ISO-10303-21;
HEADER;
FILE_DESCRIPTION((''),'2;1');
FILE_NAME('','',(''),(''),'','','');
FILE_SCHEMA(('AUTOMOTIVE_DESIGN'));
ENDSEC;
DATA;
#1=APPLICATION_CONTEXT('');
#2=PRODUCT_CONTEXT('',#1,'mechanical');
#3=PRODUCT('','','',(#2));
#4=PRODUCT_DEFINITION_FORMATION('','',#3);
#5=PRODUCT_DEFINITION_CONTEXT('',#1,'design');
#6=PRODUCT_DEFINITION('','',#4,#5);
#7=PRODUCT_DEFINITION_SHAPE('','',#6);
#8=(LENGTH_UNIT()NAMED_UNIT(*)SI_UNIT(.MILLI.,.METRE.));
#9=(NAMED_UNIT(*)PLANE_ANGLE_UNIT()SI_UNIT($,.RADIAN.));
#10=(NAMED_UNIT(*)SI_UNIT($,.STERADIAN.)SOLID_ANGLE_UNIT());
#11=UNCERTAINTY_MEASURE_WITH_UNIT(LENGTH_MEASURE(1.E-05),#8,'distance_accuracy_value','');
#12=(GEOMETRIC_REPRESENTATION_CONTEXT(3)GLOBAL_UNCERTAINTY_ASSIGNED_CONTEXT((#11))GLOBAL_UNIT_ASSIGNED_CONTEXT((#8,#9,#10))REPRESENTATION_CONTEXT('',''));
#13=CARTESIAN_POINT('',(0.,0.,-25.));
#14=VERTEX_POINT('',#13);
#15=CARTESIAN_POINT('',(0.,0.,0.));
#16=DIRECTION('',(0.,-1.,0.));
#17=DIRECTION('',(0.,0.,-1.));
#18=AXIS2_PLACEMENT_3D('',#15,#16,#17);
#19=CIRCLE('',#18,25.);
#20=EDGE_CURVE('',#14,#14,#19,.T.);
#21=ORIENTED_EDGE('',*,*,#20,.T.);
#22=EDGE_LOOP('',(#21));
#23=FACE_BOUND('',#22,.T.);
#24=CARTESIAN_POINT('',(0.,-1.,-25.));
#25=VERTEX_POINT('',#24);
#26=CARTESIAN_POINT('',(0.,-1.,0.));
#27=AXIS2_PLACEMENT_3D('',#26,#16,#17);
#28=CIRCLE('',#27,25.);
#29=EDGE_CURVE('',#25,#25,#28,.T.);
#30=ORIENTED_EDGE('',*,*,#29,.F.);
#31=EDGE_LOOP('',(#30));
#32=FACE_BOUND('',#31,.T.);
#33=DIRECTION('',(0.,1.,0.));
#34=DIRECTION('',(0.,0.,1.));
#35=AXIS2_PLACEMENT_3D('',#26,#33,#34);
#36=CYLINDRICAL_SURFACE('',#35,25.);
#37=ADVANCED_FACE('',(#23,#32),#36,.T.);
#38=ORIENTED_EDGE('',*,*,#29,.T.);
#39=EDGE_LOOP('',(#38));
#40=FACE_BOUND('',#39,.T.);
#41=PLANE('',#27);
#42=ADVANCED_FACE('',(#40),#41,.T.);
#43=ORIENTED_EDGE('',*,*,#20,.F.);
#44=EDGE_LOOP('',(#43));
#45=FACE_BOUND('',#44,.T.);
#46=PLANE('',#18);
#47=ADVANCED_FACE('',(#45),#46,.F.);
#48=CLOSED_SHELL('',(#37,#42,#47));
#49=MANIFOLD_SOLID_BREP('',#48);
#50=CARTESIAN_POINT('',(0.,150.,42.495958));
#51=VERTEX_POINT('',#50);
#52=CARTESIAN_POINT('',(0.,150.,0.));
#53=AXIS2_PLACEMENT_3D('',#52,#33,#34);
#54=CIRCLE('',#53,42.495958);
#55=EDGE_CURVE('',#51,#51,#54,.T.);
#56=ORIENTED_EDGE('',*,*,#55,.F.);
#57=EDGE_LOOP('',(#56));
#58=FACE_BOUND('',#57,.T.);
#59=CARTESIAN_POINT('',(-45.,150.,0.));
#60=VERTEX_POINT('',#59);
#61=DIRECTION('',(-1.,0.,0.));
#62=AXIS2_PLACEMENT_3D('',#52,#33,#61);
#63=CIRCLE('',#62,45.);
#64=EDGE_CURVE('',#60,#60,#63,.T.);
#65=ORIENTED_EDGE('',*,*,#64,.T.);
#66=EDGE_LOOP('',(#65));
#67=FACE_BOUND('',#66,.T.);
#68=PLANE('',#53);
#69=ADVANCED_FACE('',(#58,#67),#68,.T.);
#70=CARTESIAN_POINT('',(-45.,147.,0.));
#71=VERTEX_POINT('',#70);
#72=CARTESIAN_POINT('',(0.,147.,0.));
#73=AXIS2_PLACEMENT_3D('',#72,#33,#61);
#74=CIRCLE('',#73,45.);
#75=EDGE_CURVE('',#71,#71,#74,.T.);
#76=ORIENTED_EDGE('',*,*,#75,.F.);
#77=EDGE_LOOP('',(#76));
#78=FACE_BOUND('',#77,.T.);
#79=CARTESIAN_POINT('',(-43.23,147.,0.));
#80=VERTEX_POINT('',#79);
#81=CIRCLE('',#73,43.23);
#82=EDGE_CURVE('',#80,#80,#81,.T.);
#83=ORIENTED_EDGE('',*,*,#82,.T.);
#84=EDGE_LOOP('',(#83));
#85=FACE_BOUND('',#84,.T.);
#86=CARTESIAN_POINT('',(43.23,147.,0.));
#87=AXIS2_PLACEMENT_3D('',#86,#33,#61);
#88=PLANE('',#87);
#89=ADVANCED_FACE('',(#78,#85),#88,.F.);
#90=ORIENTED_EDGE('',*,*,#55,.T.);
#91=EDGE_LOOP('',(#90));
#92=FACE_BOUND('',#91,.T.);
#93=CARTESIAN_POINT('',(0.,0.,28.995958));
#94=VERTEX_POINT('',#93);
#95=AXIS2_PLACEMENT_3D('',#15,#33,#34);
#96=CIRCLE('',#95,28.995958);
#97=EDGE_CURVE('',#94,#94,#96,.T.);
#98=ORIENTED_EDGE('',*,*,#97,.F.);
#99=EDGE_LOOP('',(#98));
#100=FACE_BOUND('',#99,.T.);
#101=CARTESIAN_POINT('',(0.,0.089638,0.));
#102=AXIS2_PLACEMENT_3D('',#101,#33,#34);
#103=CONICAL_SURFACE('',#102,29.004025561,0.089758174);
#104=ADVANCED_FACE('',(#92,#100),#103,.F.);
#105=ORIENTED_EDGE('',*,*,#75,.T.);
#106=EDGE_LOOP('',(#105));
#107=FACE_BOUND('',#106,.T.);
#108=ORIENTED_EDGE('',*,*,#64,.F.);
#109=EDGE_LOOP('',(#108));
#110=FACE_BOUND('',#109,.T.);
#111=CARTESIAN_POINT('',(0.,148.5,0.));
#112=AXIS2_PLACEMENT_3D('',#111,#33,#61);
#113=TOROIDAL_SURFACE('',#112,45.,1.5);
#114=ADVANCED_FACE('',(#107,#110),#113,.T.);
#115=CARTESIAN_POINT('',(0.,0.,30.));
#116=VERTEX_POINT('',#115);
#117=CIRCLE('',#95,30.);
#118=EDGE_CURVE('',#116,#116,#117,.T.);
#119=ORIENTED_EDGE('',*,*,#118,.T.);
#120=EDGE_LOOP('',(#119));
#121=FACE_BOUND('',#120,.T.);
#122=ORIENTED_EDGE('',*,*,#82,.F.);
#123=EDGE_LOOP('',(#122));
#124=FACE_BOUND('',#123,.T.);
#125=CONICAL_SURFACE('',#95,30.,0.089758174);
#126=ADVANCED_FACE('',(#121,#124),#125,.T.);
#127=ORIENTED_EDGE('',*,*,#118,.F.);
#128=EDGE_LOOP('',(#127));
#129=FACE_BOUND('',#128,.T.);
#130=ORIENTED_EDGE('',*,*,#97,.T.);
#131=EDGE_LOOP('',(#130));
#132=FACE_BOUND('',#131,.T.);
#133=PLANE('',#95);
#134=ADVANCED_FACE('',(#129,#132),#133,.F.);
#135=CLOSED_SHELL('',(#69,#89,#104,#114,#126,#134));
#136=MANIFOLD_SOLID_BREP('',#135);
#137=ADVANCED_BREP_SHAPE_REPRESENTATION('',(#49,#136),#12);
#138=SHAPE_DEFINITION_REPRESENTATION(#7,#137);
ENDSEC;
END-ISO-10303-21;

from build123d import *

# Parameters (mm, degrees)
SKETCH5_R           = 25
BOSS_EXTRUDE1_DEPTH = 1


# Read off the part's stored shape, not the designer's step: Loft-Thin1
with BuildPart() as part:
    # Loft-Thin1 outline → Loft-Thin1 (revolve)
    with BuildSketch(Plane.XY):
        Polygon((42.495958168, 150), (28.995958168, 0), (30, 0), (43.5, 150), align=None)
    revolve(axis=Axis((0, 0, 0), (0, 1, 0)))

    # Sketch6 → Revolve1 (revolve)
    with BuildSketch(Plane.XY, mode=Mode.PRIVATE) as revolve1_sk:
        with BuildLine():
            Line((43.5, 150), (43.23, 147))
            Line((43.23, 147), (45, 147))
            ThreePointArc((45, 147), (46.5, 148.5), (45, 150))
            Line((45, 150), (43.5, 150))
        make_face()
    revolve(revolve1_sk.sketch.rotate(Axis((0, 150, 0), (0, -1, 0)), 90), axis=Axis((0, 150, 0), (0, -1, 0)))


with BuildPart() as body_2:
    # Sketch5 → Boss-Extrude1 (new body)
    with BuildSketch(Plane.XZ):
        with Locations(Location((0, 0, 0), (0, 0, 270))):
            Circle(SKETCH5_R)
    extrude(amount=BOSS_EXTRUDE1_DEPTH)


solid = Compound([part.part, body_2.part])
